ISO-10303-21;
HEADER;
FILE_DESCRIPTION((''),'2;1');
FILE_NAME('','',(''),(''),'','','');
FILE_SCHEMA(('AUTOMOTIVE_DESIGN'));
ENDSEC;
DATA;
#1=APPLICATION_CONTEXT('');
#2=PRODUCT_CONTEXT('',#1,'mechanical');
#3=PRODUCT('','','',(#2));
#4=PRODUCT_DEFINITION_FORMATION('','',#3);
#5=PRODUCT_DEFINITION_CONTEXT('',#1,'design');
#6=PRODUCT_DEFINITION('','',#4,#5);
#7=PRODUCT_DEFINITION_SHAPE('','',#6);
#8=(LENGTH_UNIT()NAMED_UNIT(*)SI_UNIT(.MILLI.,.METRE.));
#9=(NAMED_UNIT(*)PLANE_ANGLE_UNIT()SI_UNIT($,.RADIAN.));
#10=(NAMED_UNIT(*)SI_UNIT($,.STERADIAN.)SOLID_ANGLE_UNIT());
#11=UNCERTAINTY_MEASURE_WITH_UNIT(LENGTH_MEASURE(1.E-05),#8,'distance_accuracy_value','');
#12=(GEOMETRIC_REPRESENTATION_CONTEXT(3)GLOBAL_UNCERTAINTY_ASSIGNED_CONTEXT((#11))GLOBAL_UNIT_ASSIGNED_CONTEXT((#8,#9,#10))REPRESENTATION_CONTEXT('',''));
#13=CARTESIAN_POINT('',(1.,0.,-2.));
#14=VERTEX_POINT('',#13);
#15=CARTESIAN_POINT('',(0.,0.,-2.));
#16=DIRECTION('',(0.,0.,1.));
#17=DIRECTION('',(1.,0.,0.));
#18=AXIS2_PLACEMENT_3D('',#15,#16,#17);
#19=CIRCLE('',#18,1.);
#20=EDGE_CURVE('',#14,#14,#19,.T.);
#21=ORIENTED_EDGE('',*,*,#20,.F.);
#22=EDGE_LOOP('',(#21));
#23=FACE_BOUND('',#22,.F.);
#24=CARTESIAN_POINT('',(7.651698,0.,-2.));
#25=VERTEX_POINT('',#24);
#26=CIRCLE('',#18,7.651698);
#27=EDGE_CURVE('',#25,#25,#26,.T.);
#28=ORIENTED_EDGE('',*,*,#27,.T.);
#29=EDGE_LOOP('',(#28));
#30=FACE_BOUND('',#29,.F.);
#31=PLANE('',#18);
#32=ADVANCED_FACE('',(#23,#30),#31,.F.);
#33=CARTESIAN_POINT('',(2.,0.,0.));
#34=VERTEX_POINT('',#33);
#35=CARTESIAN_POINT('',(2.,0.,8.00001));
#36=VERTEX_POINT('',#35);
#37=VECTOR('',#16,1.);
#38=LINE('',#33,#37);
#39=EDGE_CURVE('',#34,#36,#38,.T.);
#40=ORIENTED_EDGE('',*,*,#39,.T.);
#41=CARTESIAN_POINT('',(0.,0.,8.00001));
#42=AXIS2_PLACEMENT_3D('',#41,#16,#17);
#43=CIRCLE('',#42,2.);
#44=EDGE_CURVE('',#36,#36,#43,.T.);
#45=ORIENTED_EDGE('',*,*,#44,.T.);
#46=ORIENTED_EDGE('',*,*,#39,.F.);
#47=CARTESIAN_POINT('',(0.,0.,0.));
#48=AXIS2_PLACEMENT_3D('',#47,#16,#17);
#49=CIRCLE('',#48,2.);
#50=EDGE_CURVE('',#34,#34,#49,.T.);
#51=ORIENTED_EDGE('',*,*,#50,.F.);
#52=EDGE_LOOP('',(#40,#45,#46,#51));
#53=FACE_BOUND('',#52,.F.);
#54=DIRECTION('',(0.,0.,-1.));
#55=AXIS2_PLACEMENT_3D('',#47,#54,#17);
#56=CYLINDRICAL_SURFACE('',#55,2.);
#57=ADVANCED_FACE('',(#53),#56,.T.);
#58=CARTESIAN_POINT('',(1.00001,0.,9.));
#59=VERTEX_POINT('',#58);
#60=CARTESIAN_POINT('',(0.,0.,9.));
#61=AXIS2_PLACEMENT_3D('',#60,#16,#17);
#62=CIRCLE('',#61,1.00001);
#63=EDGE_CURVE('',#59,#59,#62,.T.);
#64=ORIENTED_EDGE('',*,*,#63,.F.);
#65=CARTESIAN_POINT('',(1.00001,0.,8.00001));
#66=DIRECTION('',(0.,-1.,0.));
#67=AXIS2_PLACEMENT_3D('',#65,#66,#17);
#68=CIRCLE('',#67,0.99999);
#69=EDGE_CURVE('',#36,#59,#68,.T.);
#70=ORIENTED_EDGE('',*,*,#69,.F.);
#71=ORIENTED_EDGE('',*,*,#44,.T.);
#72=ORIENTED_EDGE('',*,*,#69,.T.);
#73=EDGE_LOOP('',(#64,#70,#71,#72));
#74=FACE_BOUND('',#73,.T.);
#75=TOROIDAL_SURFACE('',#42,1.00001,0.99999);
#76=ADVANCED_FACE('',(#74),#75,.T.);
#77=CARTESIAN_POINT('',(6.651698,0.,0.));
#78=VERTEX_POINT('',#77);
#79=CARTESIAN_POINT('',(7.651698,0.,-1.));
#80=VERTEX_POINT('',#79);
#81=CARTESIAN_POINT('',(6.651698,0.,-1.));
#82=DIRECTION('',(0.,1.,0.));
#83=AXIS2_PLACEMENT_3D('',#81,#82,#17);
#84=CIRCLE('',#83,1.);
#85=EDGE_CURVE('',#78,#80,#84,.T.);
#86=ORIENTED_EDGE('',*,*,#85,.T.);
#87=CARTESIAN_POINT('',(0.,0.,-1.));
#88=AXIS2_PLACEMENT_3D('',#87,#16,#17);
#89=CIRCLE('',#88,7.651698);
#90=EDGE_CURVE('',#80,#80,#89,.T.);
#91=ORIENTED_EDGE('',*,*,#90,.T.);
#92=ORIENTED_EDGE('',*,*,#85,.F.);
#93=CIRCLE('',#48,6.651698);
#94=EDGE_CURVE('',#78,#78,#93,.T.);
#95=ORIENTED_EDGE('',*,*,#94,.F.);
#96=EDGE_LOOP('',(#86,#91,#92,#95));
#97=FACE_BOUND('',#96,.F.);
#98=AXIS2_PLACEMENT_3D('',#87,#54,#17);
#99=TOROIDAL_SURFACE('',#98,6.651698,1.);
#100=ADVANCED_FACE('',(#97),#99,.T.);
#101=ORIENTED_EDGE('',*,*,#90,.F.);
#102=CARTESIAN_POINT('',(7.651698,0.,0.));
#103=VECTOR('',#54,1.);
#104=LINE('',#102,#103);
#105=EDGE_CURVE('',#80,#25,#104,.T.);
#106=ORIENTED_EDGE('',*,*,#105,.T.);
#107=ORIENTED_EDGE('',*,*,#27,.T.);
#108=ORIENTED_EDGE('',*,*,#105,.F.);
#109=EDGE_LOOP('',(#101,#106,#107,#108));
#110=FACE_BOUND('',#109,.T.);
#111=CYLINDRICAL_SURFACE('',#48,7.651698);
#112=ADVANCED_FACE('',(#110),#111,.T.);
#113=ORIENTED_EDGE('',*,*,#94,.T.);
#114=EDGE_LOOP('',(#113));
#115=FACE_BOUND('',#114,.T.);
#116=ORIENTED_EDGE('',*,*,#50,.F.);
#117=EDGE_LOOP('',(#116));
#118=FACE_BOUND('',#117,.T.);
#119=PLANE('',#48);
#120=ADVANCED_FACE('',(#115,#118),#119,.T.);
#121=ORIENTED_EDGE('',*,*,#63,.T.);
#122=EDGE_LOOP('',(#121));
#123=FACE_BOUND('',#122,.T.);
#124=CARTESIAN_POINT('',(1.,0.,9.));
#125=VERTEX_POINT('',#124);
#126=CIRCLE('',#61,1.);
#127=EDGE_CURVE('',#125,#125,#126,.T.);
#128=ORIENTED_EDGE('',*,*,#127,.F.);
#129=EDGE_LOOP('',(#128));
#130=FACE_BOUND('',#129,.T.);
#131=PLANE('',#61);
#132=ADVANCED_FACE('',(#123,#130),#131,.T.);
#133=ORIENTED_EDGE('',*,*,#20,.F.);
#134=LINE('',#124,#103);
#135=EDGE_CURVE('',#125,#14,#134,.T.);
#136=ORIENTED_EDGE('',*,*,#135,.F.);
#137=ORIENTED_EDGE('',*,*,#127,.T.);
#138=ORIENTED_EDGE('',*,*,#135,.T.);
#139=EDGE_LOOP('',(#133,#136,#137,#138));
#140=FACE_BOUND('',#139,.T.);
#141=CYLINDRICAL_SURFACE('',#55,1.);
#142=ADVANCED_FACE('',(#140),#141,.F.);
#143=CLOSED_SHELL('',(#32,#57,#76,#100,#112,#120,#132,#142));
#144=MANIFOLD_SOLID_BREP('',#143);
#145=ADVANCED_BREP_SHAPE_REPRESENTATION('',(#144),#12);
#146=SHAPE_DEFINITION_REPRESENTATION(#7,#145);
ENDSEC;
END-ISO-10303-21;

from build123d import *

# Parameters (mm, degrees)
F0_R     = 7.6516982388
F0_R_2   = 1
F2_DEPTH = 2
F1_R     = 2
F1_R_2   = 1
F3_DEPTH = 9
F4_R     = 0.99999
F5_R     = 1


# Not quite as in the source:
# - a fillet or chamfer is up to 0.001 mm smaller than in the source, because OpenCascade refuses the exact size


with BuildPart() as f2:
    # F0 (on Top) → F2 (new body)
    with BuildSketch(Plane.XY):
        Circle(F0_R)
        Circle(F0_R_2, mode=Mode.SUBTRACT)
    extrude(amount=-F2_DEPTH)

    # F1 (on face) → F3 (join)
    with BuildSketch(Plane.XY):
        Circle(F1_R)
        Circle(F1_R_2, mode=Mode.SUBTRACT)
    extrude(amount=F3_DEPTH)

    # F4 (radius 1 in the source; OpenCascade refuses exactly that, so slightly less here)
    f4_edges = [f2.edges().sort_by_distance(p)[0] for p in [
        (-2, 0, 9),
    ]]
    fillet(f4_edges, radius=F4_R)

    # F5
    f5_edges = [f2.edges().sort_by_distance(p)[0] for p in [
        (-7.651698, 0, 0),
    ]]
    fillet(f5_edges, radius=F5_R)


solid = f2.part
